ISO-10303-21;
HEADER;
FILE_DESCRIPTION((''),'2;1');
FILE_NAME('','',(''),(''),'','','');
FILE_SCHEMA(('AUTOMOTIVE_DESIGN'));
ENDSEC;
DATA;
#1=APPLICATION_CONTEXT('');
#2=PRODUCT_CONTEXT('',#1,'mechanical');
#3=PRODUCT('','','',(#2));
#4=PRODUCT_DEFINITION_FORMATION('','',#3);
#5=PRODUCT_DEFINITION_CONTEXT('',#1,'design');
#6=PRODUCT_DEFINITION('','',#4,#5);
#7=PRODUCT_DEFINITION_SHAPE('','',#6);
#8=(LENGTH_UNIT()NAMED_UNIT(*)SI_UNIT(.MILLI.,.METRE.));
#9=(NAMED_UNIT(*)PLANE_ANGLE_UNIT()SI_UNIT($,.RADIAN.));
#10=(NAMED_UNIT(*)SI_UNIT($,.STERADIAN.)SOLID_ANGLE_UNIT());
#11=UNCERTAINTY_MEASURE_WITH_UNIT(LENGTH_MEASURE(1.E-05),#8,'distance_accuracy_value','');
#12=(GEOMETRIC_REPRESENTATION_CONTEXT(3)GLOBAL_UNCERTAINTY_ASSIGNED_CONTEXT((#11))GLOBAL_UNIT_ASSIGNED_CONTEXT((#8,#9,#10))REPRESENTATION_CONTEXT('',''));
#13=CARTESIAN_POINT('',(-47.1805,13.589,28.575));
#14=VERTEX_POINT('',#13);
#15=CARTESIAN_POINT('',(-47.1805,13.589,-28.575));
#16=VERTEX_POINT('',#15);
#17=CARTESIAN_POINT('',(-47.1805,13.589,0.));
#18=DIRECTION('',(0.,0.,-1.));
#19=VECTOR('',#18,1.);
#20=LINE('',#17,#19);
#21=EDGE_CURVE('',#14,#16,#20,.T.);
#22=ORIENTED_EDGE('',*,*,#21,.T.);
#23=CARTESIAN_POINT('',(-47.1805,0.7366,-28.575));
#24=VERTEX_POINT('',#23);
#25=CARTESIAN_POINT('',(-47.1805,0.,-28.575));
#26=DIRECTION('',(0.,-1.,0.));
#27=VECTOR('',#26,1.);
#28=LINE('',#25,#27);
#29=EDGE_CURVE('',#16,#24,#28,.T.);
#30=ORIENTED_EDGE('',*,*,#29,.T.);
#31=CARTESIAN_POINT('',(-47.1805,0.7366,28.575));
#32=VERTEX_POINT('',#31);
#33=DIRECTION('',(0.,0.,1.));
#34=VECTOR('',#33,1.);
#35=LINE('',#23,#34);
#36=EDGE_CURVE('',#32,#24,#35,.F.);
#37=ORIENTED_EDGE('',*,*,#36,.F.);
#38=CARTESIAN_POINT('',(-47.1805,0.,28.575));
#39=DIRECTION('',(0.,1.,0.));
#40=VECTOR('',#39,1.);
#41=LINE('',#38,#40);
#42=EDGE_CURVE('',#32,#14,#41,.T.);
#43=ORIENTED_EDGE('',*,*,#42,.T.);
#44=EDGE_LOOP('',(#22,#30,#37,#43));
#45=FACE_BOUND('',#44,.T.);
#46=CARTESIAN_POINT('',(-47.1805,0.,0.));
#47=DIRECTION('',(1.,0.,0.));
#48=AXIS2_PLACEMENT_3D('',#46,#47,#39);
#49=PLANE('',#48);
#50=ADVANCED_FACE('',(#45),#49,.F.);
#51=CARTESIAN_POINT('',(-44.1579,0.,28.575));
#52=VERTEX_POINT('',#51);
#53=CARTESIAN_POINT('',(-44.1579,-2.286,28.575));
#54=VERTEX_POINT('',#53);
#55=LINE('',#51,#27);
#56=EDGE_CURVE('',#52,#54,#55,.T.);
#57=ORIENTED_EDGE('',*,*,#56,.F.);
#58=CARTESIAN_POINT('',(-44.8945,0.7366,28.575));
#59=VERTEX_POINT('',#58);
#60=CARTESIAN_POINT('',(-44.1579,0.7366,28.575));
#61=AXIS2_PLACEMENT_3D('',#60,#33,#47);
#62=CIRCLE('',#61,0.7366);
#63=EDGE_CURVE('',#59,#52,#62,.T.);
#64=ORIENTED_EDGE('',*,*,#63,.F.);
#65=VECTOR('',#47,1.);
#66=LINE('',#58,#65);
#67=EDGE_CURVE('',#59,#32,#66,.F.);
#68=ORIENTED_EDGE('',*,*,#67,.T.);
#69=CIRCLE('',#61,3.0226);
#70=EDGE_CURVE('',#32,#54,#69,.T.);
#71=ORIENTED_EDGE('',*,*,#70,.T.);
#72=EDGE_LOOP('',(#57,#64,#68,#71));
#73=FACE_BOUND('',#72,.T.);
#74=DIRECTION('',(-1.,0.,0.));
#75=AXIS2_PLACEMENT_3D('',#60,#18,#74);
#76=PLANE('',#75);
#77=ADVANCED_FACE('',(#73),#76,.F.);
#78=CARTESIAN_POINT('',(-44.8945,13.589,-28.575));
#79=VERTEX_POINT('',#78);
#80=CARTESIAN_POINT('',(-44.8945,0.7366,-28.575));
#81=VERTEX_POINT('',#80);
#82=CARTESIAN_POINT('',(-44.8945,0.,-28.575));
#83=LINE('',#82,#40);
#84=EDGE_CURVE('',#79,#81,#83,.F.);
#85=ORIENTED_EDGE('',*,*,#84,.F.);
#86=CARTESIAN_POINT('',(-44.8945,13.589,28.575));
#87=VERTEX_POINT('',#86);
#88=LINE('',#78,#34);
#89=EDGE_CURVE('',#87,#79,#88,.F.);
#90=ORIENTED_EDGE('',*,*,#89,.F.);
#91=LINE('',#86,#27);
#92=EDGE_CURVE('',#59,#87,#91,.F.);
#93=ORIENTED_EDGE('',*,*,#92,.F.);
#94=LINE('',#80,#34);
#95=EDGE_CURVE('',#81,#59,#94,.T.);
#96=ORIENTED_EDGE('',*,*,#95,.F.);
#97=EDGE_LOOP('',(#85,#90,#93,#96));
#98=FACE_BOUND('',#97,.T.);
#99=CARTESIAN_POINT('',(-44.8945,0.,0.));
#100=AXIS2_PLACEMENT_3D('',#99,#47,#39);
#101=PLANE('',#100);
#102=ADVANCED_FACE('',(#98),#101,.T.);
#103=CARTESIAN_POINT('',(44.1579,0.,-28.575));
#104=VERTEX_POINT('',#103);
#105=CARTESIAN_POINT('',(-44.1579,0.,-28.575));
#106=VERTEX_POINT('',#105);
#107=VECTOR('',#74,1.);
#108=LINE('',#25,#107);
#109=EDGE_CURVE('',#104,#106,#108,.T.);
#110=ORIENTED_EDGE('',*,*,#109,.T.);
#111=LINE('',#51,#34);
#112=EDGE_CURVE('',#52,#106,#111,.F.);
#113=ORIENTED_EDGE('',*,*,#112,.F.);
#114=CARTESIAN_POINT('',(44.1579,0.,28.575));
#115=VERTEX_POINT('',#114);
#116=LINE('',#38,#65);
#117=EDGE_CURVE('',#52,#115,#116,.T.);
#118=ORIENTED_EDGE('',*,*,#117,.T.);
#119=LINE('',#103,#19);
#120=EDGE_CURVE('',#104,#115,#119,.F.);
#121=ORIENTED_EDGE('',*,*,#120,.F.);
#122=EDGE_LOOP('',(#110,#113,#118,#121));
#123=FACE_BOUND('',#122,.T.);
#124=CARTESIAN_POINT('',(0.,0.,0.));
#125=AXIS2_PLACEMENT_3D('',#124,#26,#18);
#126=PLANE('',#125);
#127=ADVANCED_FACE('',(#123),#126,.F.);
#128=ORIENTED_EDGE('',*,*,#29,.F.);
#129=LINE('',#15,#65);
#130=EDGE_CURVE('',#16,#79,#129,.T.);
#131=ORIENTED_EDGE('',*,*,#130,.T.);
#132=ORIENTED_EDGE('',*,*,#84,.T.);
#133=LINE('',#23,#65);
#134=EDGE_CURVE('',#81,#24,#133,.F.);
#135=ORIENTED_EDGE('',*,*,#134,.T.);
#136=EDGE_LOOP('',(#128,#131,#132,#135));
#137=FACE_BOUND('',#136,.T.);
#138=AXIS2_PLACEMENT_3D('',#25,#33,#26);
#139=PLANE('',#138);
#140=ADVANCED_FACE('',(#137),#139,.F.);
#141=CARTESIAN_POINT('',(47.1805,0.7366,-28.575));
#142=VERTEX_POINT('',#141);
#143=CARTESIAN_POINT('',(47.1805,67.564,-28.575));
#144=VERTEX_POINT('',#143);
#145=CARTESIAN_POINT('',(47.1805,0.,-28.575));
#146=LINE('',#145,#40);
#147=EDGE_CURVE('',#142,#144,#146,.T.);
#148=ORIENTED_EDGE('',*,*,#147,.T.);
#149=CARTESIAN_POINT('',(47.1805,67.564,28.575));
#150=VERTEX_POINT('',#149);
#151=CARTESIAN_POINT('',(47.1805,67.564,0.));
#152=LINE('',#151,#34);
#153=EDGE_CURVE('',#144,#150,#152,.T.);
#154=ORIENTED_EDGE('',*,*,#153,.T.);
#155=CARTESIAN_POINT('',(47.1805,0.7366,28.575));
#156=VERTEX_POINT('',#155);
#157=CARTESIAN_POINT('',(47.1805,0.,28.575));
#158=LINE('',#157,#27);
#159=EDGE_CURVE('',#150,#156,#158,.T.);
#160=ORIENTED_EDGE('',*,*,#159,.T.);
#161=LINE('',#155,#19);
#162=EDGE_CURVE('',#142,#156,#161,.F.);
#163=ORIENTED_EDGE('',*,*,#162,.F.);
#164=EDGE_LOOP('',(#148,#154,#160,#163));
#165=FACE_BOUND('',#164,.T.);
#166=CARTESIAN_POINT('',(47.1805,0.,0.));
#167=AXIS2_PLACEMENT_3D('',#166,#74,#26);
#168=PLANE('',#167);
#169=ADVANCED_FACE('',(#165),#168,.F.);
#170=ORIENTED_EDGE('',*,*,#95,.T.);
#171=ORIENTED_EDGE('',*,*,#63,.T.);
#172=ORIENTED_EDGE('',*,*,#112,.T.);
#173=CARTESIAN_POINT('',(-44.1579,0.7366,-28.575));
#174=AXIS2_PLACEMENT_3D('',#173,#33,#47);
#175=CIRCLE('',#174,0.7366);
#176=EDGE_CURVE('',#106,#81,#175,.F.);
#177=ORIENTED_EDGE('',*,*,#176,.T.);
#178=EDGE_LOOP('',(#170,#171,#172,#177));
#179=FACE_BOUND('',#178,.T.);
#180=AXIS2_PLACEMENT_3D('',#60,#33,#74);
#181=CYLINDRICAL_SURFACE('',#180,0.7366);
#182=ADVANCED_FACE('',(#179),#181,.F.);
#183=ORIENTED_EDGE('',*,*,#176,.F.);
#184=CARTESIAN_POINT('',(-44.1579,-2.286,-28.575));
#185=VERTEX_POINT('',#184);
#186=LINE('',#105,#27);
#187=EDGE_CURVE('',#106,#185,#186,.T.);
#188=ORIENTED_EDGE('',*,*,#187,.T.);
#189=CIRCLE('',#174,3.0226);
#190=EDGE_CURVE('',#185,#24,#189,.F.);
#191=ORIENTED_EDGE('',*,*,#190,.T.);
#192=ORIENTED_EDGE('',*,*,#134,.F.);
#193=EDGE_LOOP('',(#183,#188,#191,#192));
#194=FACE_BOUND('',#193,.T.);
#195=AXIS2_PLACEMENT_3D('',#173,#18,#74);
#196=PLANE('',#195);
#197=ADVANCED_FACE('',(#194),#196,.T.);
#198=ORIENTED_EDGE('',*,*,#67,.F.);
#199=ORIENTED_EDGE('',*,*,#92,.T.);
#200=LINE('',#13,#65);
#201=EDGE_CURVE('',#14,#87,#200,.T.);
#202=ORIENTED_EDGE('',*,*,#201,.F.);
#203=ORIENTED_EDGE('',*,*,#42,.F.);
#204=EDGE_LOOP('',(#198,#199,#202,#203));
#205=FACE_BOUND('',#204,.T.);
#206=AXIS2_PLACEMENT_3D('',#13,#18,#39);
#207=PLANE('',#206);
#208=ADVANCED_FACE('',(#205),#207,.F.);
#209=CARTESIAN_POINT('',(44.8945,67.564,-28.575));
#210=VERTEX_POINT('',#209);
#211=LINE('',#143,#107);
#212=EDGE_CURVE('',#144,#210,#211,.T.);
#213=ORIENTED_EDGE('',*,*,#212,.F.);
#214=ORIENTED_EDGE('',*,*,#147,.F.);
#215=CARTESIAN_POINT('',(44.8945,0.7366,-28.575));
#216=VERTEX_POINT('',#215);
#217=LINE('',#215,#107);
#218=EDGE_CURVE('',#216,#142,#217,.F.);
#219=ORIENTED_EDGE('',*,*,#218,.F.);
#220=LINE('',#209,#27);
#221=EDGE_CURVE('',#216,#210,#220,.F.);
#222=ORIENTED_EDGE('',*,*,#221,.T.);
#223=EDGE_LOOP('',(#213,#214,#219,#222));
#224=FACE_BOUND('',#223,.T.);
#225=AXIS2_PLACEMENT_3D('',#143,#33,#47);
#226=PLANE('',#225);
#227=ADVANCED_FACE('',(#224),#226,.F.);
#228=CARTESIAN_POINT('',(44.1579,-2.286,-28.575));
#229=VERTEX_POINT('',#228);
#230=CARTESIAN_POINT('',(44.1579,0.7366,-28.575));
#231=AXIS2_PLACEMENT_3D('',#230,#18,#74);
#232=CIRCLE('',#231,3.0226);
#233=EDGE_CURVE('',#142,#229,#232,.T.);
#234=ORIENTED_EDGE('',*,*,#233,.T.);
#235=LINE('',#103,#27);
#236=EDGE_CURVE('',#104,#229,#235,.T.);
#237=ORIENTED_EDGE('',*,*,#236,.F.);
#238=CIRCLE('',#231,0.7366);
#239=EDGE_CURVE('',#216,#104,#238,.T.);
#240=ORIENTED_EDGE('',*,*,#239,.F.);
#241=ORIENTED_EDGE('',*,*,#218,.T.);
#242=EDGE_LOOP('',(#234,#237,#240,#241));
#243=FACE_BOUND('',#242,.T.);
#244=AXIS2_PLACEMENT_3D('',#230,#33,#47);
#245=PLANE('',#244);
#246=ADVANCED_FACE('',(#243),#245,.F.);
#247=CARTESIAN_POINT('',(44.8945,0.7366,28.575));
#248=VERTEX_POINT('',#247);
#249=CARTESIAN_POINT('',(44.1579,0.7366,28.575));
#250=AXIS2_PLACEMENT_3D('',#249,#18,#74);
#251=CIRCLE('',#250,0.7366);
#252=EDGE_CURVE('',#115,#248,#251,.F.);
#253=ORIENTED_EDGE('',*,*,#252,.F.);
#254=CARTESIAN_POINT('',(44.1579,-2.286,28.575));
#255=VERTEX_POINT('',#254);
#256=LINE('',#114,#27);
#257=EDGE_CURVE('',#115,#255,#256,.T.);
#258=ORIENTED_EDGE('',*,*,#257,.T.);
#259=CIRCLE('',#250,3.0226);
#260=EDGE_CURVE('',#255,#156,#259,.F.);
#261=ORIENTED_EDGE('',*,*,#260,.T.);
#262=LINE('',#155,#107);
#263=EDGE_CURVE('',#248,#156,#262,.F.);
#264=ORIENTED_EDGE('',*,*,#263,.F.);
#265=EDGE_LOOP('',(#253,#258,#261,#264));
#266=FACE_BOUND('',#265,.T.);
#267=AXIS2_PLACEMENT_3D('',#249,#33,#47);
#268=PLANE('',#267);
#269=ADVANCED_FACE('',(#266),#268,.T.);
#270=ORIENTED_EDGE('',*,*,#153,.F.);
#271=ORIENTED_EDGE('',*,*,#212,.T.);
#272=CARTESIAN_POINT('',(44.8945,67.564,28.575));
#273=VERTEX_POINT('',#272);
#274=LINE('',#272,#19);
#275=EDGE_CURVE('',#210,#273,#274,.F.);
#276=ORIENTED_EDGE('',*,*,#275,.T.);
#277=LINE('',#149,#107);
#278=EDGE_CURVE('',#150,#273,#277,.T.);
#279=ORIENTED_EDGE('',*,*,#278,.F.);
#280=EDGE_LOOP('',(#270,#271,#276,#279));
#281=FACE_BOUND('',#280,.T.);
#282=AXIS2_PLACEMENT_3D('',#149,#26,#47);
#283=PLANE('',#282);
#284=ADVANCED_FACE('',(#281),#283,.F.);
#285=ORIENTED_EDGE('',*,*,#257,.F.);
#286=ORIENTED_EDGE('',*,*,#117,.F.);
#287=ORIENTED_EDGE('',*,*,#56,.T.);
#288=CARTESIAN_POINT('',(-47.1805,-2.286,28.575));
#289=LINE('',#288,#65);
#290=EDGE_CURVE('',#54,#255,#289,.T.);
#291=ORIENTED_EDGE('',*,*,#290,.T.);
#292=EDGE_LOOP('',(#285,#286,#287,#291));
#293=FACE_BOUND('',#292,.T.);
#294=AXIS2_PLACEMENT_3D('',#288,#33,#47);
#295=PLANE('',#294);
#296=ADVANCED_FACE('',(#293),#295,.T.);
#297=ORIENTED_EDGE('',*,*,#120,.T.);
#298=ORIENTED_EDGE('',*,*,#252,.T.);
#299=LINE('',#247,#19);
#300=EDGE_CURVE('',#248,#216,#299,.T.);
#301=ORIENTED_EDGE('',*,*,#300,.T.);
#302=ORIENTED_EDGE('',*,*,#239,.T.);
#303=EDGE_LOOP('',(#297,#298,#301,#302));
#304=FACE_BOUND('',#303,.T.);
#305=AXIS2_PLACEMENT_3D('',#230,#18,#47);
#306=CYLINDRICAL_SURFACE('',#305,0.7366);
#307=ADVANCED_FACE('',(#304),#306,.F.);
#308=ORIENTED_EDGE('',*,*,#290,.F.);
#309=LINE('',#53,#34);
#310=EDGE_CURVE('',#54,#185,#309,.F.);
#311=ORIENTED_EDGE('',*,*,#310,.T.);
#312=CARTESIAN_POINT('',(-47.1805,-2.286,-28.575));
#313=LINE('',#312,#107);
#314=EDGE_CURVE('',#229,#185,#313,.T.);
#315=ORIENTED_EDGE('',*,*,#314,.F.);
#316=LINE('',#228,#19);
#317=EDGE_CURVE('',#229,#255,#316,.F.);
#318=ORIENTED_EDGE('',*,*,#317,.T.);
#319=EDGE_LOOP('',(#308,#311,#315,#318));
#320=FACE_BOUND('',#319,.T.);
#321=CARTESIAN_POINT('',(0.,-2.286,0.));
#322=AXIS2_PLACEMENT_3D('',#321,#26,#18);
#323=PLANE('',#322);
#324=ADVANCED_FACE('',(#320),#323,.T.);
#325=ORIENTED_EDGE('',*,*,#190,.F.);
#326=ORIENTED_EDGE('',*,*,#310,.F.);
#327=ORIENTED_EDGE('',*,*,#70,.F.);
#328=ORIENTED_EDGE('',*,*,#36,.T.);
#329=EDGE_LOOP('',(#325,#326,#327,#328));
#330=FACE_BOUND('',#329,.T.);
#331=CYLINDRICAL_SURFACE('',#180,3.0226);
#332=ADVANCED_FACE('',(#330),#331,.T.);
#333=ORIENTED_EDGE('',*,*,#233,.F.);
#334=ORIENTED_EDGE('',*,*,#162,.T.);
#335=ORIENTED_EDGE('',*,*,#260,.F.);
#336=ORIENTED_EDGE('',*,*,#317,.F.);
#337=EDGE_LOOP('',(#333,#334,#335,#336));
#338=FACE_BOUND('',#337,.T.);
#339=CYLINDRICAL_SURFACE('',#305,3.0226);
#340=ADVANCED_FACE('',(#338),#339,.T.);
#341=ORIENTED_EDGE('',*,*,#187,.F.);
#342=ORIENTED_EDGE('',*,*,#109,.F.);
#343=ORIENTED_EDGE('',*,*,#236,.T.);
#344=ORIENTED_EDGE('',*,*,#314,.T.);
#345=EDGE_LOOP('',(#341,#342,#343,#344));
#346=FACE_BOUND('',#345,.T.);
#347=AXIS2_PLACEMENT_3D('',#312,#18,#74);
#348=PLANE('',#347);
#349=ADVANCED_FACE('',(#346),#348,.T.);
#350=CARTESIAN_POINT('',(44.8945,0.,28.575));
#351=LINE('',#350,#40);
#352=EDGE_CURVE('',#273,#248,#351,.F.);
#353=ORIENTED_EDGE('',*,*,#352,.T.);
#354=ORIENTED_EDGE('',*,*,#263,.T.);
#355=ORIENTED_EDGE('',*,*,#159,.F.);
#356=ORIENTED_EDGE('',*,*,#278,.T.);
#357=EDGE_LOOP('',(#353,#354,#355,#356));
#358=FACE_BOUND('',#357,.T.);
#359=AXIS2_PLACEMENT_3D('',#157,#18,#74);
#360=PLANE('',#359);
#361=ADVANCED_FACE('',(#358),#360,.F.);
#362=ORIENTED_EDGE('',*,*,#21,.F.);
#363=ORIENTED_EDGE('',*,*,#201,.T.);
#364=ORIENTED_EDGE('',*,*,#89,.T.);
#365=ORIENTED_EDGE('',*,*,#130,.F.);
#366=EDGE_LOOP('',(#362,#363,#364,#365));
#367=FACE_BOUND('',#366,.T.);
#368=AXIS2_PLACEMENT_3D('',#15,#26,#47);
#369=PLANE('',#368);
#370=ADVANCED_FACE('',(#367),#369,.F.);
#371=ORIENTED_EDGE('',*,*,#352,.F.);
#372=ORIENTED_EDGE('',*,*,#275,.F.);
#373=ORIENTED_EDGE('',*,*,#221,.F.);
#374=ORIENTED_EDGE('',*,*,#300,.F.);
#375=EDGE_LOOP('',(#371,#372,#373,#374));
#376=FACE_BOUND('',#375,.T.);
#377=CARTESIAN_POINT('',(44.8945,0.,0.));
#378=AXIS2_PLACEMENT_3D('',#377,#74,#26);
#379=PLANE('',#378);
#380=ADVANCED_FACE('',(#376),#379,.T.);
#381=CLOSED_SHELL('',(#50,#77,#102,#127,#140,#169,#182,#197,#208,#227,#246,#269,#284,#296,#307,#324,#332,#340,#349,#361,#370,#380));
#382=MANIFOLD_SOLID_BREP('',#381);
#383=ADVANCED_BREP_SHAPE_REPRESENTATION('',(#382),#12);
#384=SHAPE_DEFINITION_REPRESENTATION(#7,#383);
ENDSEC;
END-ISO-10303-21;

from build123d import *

# Parameters (mm, degrees)
SKETCH1_W                    = 94.361
SKETCH1_H                    = 57.15
BASE_FLANGE1_DEPTH           = 2.286
EDGE_FLANGE1_STRIP_W         = 10.6172
EDGE_FLANGE1_STRIP_H         = 2.286
EDGE_FLANGE1_STRIP_CUT_DEPTH = 57.15
EDGE_FLANGE1_DEPTH           = 57.15
EDGE_FLANGE2_STRIP_W         = 10.6172
EDGE_FLANGE2_STRIP_H         = 2.286
EDGE_FLANGE2_STRIP_CUT_DEPTH = 57.15
EDGE_FLANGE2_DEPTH           = 57.15


# Sheet-metal steps are written as plain solids
with BuildPart() as part:
    # Sketch1 → Base-Flange1 (new body)
    with BuildSketch(Plane(origin=(0, 0, 0), x_dir=(1, 0, 0), z_dir=(0, 1, 0))):
        Rectangle(SKETCH1_W, SKETCH1_H)
    extrude(amount=-BASE_FLANGE1_DEPTH)

    # Edge-Flange1 strip (across the edge) → Edge-Flange1 strip cut (cut)
    with BuildSketch(Plane(origin=(-47.1805, 0, -28.575), x_dir=(1, 0, 0), z_dir=(0, 0, 1))):
        with Locations((-2.286, -1.143)):
            Rectangle(EDGE_FLANGE1_STRIP_W, EDGE_FLANGE1_STRIP_H)
    extrude(amount=EDGE_FLANGE1_STRIP_CUT_DEPTH, mode=Mode.SUBTRACT)

    # Edge-Flange1 section (across the edge) → Edge-Flange1 (add)
    with BuildSketch(Plane(origin=(-47.1805, 0, -28.575), x_dir=(1, 0, 0), z_dir=(0, 0, 1))):
        with BuildLine():
            Line((0, 0.7366), (0, 13.589))
            Line((0, 13.589), (2.286, 13.589))
            Line((2.286, 13.589), (2.286, 0.7366))
            ThreePointArc((2.286, 0.7366), (2.501745145, 0.215745145), (3.0226, 0))
            Line((3.0226, 0), (3.0226, -2.286))
            ThreePointArc((3.0226, -2.286), (0.885299043, -1.400700957), (0, 0.7366))
        make_face()
    extrude(amount=EDGE_FLANGE1_DEPTH)

    # Edge-Flange2 strip (across the edge) → Edge-Flange2 strip cut (cut)
    with BuildSketch(Plane(origin=(47.1805, 0, 28.575), x_dir=(-1, 0, 0), z_dir=(0, 0, -1))):
        with Locations((-2.286, -1.143)):
            Rectangle(EDGE_FLANGE2_STRIP_W, EDGE_FLANGE2_STRIP_H)
    extrude(amount=EDGE_FLANGE2_STRIP_CUT_DEPTH, mode=Mode.SUBTRACT)

    # Edge-Flange2 section (across the edge) → Edge-Flange2 (add)
    with BuildSketch(Plane(origin=(47.1805, 0, 28.575), x_dir=(-1, 0, 0), z_dir=(0, 0, -1))):
        with BuildLine():
            Line((0, 0.7366), (0, 67.564))
            Line((0, 67.564), (2.286, 67.564))
            Line((2.286, 67.564), (2.286, 0.7366))
            ThreePointArc((2.286, 0.7366), (2.501745145, 0.215745145), (3.0226, 0))
            Line((3.0226, 0), (3.0226, -2.286))
            ThreePointArc((3.0226, -2.286), (0.885299043, -1.400700957), (0, 0.7366))
        make_face()
    extrude(amount=EDGE_FLANGE2_DEPTH)


solid = part.part
